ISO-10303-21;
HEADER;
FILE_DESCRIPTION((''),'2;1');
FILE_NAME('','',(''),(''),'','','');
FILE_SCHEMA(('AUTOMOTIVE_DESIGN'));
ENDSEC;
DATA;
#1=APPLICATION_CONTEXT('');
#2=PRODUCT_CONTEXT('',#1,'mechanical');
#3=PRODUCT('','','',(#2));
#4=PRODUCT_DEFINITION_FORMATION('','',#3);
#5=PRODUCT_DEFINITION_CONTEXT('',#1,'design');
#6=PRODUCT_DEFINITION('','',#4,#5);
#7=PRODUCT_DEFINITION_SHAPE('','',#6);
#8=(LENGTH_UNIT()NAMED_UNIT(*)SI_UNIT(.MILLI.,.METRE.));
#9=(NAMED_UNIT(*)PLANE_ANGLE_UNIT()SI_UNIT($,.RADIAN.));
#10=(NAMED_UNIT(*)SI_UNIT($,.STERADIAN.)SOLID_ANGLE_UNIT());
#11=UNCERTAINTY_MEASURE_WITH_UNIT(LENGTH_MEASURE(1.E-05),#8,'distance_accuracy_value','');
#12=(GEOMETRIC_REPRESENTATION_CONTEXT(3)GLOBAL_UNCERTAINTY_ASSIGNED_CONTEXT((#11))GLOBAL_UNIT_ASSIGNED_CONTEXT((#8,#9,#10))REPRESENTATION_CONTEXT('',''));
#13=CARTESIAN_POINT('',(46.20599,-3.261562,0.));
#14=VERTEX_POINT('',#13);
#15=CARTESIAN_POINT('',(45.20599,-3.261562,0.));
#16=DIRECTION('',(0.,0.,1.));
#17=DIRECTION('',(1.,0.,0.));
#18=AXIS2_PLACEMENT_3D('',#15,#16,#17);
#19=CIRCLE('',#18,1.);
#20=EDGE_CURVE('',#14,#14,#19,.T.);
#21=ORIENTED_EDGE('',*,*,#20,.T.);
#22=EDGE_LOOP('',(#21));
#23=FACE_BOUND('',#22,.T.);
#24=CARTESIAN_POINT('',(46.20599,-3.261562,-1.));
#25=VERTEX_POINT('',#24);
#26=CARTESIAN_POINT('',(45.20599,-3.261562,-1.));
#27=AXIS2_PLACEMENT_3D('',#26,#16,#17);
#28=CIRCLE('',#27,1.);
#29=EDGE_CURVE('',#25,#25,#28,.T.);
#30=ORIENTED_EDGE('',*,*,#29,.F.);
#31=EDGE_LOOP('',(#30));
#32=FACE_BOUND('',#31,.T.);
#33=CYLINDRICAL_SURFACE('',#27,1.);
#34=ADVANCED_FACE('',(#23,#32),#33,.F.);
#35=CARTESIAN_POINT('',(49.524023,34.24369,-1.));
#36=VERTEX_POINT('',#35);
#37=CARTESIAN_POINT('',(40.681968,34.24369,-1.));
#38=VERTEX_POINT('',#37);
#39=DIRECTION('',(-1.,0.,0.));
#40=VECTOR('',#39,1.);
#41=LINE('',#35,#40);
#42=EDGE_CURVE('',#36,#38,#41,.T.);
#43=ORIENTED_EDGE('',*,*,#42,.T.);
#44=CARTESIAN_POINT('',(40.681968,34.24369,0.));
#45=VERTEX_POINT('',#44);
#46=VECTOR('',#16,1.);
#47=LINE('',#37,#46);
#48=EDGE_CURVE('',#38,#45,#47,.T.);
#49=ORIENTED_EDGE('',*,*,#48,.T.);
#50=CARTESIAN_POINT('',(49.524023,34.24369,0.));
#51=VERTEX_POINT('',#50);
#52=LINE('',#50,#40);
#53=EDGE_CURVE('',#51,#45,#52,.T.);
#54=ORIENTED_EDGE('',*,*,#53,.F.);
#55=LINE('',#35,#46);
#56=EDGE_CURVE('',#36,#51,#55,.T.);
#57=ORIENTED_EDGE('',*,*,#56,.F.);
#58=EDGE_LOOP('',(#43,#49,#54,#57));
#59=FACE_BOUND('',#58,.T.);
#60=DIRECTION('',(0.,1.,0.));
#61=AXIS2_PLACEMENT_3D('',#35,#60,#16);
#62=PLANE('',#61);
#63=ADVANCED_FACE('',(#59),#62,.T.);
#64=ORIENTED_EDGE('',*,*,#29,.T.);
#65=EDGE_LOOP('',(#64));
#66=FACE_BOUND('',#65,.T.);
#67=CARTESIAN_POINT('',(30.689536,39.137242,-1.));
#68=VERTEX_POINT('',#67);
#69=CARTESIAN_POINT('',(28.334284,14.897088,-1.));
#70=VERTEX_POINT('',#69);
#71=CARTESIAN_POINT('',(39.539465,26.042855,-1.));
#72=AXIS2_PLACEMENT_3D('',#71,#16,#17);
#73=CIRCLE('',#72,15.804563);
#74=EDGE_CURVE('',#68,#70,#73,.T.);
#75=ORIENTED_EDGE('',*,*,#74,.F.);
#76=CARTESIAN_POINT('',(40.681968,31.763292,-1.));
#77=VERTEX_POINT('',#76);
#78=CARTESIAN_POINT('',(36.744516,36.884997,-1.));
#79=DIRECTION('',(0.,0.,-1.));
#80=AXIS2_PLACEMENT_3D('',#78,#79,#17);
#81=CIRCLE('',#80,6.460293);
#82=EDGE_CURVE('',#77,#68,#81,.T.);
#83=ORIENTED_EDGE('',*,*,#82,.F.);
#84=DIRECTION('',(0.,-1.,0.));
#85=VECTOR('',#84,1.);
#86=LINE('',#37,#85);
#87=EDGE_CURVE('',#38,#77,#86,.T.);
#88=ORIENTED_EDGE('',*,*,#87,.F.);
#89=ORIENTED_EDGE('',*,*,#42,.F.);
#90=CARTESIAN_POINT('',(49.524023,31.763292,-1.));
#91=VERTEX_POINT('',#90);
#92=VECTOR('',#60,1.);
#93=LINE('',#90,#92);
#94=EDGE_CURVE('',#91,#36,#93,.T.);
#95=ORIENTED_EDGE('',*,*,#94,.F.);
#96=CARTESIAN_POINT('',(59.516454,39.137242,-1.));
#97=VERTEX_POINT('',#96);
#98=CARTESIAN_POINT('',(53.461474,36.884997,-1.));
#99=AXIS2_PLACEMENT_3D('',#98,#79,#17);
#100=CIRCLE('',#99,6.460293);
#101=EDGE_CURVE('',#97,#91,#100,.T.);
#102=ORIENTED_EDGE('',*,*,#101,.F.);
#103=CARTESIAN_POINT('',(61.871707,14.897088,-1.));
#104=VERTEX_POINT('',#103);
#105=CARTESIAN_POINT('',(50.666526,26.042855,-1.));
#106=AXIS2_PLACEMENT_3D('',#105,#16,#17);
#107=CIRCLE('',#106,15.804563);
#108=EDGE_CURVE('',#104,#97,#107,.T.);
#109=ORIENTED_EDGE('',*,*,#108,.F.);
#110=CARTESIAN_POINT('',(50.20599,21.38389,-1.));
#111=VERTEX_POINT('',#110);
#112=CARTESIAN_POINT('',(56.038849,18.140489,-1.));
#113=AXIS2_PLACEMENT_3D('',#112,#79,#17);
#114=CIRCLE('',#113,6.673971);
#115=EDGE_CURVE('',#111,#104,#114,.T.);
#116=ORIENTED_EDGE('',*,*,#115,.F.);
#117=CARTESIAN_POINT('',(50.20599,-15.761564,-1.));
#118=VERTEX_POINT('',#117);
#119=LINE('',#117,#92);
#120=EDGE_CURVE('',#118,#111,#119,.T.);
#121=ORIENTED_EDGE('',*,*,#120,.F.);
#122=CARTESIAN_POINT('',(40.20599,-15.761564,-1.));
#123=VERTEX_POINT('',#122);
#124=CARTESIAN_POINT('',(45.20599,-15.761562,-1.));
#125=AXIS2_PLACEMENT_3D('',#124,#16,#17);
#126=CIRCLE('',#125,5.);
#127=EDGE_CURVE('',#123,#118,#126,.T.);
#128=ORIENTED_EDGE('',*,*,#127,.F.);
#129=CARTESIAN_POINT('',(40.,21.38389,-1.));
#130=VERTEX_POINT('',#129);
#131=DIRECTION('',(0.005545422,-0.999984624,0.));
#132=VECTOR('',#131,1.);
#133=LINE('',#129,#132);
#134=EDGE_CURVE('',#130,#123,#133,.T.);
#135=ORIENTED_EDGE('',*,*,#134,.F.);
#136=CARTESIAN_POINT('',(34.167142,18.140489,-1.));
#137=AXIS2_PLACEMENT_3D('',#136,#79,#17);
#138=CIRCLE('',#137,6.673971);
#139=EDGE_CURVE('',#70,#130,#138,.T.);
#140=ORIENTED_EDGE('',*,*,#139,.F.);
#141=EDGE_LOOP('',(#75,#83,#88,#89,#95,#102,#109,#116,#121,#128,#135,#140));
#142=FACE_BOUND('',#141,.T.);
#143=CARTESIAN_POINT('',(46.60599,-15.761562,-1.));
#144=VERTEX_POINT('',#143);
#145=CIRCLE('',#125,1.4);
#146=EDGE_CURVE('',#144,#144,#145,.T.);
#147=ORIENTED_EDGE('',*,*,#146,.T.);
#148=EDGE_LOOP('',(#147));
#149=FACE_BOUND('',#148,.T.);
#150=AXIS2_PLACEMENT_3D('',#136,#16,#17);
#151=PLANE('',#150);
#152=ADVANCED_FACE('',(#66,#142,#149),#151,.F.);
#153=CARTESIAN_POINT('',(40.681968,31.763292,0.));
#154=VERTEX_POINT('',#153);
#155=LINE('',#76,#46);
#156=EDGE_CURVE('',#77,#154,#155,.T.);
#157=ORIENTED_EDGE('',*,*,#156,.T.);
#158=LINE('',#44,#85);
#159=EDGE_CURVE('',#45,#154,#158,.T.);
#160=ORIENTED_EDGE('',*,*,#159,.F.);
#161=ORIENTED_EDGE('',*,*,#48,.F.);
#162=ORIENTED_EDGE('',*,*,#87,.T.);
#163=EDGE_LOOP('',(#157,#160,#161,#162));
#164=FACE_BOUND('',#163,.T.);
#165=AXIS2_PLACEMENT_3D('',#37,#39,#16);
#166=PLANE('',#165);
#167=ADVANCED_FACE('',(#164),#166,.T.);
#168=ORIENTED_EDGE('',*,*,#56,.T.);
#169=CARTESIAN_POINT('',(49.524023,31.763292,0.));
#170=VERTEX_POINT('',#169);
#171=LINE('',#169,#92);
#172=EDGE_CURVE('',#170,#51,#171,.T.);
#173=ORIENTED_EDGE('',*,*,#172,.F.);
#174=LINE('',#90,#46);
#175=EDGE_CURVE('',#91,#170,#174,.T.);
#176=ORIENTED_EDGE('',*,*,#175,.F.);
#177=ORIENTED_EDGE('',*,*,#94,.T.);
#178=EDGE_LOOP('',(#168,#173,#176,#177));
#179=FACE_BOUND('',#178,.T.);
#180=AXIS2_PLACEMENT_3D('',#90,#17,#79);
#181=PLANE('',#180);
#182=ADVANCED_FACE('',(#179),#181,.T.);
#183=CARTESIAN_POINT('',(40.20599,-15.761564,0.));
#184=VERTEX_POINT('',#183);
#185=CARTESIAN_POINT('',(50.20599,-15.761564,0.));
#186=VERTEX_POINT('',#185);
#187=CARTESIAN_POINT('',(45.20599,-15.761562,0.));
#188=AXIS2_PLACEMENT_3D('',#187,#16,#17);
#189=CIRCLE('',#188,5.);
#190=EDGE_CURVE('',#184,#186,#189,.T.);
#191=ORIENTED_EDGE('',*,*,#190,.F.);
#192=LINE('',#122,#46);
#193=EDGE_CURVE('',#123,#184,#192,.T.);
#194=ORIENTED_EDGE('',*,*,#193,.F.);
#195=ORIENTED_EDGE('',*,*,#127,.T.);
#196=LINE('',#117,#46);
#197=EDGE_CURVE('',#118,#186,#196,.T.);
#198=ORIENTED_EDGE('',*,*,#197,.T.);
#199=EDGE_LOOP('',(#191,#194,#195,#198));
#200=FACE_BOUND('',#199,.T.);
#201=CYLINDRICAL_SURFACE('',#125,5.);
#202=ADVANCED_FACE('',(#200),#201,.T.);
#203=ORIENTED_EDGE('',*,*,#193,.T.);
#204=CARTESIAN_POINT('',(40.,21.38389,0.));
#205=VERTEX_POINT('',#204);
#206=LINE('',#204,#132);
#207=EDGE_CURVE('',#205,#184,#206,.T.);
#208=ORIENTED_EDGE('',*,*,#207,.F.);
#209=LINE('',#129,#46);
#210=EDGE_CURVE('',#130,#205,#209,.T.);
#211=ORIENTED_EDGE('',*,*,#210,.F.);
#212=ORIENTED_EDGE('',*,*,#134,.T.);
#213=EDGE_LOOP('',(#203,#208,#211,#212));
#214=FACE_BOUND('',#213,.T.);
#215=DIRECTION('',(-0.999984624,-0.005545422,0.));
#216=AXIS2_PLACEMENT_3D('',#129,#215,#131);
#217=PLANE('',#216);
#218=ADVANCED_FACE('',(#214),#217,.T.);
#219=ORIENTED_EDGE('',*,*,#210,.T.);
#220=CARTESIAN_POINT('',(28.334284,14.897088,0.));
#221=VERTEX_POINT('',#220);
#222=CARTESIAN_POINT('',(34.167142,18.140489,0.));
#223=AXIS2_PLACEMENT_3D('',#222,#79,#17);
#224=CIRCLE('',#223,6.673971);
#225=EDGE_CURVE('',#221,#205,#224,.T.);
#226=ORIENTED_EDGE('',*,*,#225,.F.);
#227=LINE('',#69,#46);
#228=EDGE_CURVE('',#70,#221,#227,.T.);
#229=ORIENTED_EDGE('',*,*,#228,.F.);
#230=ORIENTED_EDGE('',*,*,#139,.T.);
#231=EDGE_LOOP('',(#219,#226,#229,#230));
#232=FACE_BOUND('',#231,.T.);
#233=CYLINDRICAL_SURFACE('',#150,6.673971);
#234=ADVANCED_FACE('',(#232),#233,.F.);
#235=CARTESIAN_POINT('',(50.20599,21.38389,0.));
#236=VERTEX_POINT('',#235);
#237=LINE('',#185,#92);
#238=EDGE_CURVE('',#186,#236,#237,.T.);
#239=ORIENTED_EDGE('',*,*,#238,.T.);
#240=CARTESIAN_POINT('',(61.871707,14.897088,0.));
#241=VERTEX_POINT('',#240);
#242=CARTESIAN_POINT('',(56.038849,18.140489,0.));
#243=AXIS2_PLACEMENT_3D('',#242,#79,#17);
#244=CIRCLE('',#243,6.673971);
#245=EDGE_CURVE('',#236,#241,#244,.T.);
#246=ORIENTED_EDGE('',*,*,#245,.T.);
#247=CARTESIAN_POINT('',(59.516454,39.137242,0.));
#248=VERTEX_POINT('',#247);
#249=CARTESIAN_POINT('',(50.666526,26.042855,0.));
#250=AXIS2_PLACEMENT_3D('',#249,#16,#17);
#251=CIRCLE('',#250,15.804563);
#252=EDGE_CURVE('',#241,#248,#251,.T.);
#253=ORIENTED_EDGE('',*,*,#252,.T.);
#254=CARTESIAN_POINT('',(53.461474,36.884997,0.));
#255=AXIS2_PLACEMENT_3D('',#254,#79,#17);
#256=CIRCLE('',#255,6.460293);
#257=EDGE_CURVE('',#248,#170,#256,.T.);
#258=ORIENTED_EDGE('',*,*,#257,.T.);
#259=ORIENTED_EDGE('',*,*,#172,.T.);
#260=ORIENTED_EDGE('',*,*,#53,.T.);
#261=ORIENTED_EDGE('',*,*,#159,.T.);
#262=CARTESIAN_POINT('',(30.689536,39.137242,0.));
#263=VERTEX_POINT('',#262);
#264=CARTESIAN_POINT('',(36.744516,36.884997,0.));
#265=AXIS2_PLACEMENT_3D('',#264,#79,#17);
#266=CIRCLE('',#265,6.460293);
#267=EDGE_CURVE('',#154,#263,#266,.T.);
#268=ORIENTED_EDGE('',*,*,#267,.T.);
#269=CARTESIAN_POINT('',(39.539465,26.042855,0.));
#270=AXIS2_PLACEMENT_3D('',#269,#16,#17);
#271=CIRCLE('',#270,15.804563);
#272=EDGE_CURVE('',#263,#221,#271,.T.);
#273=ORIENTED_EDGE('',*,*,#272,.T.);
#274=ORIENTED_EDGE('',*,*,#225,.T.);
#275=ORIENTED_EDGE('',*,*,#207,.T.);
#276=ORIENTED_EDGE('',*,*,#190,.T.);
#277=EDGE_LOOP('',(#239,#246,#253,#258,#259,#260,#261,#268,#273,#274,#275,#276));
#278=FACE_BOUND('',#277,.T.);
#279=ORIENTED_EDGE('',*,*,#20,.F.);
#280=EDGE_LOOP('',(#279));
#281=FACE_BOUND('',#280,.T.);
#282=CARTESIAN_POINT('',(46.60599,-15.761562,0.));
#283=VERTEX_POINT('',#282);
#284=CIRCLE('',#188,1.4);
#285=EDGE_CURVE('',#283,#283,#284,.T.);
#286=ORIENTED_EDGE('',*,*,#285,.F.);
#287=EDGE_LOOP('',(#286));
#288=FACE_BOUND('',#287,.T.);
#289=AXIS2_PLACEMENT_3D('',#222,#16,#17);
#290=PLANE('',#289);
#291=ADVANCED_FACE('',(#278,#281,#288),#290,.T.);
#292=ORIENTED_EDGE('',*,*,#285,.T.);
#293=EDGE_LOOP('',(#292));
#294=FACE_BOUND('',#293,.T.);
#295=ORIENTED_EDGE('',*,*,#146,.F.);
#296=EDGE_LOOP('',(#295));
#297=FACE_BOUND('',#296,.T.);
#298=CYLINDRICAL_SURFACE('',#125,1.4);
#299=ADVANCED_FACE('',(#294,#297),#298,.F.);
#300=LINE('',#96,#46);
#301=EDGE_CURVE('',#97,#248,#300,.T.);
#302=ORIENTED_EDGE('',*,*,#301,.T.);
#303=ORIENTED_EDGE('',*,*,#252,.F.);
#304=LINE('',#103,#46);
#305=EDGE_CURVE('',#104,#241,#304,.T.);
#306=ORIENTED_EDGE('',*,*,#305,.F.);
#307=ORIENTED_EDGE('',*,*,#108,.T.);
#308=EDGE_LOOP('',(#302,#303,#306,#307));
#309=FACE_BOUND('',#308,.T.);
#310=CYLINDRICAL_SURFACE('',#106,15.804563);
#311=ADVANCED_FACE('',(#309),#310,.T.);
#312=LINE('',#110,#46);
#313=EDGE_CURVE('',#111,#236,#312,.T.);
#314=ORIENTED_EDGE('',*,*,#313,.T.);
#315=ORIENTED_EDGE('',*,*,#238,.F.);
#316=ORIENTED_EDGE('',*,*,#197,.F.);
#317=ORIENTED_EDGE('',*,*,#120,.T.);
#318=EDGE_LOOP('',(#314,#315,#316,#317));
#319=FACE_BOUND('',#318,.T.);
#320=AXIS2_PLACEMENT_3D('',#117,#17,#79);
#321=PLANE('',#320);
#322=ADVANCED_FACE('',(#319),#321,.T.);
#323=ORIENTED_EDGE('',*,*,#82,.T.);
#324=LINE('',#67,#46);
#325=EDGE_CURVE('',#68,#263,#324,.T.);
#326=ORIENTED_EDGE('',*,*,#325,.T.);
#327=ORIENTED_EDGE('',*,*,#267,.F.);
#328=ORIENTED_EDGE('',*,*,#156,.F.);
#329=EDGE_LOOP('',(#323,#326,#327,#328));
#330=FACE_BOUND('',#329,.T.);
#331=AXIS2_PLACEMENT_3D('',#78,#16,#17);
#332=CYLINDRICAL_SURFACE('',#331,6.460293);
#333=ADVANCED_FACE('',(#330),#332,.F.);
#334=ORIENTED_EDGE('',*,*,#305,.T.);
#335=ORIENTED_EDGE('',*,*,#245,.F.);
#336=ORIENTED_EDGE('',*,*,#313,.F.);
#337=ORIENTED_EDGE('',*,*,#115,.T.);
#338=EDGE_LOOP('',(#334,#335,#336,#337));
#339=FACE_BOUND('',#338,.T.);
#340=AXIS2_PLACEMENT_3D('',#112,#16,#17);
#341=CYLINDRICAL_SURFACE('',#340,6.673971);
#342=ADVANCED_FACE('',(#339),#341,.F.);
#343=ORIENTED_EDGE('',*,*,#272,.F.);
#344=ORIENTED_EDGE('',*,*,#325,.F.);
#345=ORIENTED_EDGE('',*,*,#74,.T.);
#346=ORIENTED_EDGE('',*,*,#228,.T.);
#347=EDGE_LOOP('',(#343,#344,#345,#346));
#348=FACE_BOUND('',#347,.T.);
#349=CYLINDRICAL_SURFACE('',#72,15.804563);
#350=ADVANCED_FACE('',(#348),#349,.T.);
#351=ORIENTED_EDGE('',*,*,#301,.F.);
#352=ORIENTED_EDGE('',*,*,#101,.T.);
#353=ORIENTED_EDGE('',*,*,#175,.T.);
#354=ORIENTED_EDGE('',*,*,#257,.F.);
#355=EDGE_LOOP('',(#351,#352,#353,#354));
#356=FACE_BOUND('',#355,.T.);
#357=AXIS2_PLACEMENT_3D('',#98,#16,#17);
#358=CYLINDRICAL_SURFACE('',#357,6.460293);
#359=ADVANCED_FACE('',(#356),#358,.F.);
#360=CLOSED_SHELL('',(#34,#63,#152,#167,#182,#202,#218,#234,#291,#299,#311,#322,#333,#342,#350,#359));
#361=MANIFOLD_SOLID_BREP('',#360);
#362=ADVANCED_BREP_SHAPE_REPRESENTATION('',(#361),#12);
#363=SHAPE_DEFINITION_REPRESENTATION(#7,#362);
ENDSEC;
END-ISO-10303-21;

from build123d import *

# Parameters (mm, degrees)
MODEL_R           = 1.4
MODEL_R_2         = 1
BRIDA_BASE1_DEPTH = 1


# Sheet-metal steps are written as plain solids
with BuildPart() as part:
    # Model → Brida base1 (new body)
    with BuildSketch(Plane.XY):
        with BuildLine():
            Line((40, 21.38389001), (40.2059904, -15.761563617))
            ThreePointArc((40.2059904, -15.761563617), (45.205990408, -20.761561608), (50.205990416, -15.761563617))
            Line((50.205990416, -15.761563617), (50.205990416, 21.38389001))
            ThreePointArc((50.205990416, 21.38389001), (59.282249533, 23.973347274), (61.871706797, 14.897088157))
            ThreePointArc((61.871706797, 14.897088157), (66.397009574, 27.571280603), (59.516453931, 39.13724245))
            ThreePointArc((59.516453931, 39.13724245), (57.297457404, 31.686860899), (49.524022567, 31.763291841))
            Line((49.524022567, 31.763291841), (49.524022567, 34.243690175))
            Line((49.524022567, 34.243690175), (40.681967849, 34.243690175))
            Line((40.681967849, 34.243690175), (40.681967849, 31.763291841))
            ThreePointArc((40.681967849, 31.763291841), (32.908533012, 31.686860899), (30.689536484, 39.13724245))
            ThreePointArc((30.689536484, 39.13724245), (23.808980842, 27.571280603), (28.334283619, 14.897088157))
            ThreePointArc((28.334283619, 14.897088157), (30.923740883, 23.973347274), (40, 21.38389001))
        make_face()
        with Locations((45.205990408, -15.7615616)):
            Circle(MODEL_R, mode=Mode.SUBTRACT)
        with Locations((45.205990408, -3.2615616)):
            Circle(MODEL_R_2, mode=Mode.SUBTRACT)
    extrude(amount=-BRIDA_BASE1_DEPTH)


solid = part.part
